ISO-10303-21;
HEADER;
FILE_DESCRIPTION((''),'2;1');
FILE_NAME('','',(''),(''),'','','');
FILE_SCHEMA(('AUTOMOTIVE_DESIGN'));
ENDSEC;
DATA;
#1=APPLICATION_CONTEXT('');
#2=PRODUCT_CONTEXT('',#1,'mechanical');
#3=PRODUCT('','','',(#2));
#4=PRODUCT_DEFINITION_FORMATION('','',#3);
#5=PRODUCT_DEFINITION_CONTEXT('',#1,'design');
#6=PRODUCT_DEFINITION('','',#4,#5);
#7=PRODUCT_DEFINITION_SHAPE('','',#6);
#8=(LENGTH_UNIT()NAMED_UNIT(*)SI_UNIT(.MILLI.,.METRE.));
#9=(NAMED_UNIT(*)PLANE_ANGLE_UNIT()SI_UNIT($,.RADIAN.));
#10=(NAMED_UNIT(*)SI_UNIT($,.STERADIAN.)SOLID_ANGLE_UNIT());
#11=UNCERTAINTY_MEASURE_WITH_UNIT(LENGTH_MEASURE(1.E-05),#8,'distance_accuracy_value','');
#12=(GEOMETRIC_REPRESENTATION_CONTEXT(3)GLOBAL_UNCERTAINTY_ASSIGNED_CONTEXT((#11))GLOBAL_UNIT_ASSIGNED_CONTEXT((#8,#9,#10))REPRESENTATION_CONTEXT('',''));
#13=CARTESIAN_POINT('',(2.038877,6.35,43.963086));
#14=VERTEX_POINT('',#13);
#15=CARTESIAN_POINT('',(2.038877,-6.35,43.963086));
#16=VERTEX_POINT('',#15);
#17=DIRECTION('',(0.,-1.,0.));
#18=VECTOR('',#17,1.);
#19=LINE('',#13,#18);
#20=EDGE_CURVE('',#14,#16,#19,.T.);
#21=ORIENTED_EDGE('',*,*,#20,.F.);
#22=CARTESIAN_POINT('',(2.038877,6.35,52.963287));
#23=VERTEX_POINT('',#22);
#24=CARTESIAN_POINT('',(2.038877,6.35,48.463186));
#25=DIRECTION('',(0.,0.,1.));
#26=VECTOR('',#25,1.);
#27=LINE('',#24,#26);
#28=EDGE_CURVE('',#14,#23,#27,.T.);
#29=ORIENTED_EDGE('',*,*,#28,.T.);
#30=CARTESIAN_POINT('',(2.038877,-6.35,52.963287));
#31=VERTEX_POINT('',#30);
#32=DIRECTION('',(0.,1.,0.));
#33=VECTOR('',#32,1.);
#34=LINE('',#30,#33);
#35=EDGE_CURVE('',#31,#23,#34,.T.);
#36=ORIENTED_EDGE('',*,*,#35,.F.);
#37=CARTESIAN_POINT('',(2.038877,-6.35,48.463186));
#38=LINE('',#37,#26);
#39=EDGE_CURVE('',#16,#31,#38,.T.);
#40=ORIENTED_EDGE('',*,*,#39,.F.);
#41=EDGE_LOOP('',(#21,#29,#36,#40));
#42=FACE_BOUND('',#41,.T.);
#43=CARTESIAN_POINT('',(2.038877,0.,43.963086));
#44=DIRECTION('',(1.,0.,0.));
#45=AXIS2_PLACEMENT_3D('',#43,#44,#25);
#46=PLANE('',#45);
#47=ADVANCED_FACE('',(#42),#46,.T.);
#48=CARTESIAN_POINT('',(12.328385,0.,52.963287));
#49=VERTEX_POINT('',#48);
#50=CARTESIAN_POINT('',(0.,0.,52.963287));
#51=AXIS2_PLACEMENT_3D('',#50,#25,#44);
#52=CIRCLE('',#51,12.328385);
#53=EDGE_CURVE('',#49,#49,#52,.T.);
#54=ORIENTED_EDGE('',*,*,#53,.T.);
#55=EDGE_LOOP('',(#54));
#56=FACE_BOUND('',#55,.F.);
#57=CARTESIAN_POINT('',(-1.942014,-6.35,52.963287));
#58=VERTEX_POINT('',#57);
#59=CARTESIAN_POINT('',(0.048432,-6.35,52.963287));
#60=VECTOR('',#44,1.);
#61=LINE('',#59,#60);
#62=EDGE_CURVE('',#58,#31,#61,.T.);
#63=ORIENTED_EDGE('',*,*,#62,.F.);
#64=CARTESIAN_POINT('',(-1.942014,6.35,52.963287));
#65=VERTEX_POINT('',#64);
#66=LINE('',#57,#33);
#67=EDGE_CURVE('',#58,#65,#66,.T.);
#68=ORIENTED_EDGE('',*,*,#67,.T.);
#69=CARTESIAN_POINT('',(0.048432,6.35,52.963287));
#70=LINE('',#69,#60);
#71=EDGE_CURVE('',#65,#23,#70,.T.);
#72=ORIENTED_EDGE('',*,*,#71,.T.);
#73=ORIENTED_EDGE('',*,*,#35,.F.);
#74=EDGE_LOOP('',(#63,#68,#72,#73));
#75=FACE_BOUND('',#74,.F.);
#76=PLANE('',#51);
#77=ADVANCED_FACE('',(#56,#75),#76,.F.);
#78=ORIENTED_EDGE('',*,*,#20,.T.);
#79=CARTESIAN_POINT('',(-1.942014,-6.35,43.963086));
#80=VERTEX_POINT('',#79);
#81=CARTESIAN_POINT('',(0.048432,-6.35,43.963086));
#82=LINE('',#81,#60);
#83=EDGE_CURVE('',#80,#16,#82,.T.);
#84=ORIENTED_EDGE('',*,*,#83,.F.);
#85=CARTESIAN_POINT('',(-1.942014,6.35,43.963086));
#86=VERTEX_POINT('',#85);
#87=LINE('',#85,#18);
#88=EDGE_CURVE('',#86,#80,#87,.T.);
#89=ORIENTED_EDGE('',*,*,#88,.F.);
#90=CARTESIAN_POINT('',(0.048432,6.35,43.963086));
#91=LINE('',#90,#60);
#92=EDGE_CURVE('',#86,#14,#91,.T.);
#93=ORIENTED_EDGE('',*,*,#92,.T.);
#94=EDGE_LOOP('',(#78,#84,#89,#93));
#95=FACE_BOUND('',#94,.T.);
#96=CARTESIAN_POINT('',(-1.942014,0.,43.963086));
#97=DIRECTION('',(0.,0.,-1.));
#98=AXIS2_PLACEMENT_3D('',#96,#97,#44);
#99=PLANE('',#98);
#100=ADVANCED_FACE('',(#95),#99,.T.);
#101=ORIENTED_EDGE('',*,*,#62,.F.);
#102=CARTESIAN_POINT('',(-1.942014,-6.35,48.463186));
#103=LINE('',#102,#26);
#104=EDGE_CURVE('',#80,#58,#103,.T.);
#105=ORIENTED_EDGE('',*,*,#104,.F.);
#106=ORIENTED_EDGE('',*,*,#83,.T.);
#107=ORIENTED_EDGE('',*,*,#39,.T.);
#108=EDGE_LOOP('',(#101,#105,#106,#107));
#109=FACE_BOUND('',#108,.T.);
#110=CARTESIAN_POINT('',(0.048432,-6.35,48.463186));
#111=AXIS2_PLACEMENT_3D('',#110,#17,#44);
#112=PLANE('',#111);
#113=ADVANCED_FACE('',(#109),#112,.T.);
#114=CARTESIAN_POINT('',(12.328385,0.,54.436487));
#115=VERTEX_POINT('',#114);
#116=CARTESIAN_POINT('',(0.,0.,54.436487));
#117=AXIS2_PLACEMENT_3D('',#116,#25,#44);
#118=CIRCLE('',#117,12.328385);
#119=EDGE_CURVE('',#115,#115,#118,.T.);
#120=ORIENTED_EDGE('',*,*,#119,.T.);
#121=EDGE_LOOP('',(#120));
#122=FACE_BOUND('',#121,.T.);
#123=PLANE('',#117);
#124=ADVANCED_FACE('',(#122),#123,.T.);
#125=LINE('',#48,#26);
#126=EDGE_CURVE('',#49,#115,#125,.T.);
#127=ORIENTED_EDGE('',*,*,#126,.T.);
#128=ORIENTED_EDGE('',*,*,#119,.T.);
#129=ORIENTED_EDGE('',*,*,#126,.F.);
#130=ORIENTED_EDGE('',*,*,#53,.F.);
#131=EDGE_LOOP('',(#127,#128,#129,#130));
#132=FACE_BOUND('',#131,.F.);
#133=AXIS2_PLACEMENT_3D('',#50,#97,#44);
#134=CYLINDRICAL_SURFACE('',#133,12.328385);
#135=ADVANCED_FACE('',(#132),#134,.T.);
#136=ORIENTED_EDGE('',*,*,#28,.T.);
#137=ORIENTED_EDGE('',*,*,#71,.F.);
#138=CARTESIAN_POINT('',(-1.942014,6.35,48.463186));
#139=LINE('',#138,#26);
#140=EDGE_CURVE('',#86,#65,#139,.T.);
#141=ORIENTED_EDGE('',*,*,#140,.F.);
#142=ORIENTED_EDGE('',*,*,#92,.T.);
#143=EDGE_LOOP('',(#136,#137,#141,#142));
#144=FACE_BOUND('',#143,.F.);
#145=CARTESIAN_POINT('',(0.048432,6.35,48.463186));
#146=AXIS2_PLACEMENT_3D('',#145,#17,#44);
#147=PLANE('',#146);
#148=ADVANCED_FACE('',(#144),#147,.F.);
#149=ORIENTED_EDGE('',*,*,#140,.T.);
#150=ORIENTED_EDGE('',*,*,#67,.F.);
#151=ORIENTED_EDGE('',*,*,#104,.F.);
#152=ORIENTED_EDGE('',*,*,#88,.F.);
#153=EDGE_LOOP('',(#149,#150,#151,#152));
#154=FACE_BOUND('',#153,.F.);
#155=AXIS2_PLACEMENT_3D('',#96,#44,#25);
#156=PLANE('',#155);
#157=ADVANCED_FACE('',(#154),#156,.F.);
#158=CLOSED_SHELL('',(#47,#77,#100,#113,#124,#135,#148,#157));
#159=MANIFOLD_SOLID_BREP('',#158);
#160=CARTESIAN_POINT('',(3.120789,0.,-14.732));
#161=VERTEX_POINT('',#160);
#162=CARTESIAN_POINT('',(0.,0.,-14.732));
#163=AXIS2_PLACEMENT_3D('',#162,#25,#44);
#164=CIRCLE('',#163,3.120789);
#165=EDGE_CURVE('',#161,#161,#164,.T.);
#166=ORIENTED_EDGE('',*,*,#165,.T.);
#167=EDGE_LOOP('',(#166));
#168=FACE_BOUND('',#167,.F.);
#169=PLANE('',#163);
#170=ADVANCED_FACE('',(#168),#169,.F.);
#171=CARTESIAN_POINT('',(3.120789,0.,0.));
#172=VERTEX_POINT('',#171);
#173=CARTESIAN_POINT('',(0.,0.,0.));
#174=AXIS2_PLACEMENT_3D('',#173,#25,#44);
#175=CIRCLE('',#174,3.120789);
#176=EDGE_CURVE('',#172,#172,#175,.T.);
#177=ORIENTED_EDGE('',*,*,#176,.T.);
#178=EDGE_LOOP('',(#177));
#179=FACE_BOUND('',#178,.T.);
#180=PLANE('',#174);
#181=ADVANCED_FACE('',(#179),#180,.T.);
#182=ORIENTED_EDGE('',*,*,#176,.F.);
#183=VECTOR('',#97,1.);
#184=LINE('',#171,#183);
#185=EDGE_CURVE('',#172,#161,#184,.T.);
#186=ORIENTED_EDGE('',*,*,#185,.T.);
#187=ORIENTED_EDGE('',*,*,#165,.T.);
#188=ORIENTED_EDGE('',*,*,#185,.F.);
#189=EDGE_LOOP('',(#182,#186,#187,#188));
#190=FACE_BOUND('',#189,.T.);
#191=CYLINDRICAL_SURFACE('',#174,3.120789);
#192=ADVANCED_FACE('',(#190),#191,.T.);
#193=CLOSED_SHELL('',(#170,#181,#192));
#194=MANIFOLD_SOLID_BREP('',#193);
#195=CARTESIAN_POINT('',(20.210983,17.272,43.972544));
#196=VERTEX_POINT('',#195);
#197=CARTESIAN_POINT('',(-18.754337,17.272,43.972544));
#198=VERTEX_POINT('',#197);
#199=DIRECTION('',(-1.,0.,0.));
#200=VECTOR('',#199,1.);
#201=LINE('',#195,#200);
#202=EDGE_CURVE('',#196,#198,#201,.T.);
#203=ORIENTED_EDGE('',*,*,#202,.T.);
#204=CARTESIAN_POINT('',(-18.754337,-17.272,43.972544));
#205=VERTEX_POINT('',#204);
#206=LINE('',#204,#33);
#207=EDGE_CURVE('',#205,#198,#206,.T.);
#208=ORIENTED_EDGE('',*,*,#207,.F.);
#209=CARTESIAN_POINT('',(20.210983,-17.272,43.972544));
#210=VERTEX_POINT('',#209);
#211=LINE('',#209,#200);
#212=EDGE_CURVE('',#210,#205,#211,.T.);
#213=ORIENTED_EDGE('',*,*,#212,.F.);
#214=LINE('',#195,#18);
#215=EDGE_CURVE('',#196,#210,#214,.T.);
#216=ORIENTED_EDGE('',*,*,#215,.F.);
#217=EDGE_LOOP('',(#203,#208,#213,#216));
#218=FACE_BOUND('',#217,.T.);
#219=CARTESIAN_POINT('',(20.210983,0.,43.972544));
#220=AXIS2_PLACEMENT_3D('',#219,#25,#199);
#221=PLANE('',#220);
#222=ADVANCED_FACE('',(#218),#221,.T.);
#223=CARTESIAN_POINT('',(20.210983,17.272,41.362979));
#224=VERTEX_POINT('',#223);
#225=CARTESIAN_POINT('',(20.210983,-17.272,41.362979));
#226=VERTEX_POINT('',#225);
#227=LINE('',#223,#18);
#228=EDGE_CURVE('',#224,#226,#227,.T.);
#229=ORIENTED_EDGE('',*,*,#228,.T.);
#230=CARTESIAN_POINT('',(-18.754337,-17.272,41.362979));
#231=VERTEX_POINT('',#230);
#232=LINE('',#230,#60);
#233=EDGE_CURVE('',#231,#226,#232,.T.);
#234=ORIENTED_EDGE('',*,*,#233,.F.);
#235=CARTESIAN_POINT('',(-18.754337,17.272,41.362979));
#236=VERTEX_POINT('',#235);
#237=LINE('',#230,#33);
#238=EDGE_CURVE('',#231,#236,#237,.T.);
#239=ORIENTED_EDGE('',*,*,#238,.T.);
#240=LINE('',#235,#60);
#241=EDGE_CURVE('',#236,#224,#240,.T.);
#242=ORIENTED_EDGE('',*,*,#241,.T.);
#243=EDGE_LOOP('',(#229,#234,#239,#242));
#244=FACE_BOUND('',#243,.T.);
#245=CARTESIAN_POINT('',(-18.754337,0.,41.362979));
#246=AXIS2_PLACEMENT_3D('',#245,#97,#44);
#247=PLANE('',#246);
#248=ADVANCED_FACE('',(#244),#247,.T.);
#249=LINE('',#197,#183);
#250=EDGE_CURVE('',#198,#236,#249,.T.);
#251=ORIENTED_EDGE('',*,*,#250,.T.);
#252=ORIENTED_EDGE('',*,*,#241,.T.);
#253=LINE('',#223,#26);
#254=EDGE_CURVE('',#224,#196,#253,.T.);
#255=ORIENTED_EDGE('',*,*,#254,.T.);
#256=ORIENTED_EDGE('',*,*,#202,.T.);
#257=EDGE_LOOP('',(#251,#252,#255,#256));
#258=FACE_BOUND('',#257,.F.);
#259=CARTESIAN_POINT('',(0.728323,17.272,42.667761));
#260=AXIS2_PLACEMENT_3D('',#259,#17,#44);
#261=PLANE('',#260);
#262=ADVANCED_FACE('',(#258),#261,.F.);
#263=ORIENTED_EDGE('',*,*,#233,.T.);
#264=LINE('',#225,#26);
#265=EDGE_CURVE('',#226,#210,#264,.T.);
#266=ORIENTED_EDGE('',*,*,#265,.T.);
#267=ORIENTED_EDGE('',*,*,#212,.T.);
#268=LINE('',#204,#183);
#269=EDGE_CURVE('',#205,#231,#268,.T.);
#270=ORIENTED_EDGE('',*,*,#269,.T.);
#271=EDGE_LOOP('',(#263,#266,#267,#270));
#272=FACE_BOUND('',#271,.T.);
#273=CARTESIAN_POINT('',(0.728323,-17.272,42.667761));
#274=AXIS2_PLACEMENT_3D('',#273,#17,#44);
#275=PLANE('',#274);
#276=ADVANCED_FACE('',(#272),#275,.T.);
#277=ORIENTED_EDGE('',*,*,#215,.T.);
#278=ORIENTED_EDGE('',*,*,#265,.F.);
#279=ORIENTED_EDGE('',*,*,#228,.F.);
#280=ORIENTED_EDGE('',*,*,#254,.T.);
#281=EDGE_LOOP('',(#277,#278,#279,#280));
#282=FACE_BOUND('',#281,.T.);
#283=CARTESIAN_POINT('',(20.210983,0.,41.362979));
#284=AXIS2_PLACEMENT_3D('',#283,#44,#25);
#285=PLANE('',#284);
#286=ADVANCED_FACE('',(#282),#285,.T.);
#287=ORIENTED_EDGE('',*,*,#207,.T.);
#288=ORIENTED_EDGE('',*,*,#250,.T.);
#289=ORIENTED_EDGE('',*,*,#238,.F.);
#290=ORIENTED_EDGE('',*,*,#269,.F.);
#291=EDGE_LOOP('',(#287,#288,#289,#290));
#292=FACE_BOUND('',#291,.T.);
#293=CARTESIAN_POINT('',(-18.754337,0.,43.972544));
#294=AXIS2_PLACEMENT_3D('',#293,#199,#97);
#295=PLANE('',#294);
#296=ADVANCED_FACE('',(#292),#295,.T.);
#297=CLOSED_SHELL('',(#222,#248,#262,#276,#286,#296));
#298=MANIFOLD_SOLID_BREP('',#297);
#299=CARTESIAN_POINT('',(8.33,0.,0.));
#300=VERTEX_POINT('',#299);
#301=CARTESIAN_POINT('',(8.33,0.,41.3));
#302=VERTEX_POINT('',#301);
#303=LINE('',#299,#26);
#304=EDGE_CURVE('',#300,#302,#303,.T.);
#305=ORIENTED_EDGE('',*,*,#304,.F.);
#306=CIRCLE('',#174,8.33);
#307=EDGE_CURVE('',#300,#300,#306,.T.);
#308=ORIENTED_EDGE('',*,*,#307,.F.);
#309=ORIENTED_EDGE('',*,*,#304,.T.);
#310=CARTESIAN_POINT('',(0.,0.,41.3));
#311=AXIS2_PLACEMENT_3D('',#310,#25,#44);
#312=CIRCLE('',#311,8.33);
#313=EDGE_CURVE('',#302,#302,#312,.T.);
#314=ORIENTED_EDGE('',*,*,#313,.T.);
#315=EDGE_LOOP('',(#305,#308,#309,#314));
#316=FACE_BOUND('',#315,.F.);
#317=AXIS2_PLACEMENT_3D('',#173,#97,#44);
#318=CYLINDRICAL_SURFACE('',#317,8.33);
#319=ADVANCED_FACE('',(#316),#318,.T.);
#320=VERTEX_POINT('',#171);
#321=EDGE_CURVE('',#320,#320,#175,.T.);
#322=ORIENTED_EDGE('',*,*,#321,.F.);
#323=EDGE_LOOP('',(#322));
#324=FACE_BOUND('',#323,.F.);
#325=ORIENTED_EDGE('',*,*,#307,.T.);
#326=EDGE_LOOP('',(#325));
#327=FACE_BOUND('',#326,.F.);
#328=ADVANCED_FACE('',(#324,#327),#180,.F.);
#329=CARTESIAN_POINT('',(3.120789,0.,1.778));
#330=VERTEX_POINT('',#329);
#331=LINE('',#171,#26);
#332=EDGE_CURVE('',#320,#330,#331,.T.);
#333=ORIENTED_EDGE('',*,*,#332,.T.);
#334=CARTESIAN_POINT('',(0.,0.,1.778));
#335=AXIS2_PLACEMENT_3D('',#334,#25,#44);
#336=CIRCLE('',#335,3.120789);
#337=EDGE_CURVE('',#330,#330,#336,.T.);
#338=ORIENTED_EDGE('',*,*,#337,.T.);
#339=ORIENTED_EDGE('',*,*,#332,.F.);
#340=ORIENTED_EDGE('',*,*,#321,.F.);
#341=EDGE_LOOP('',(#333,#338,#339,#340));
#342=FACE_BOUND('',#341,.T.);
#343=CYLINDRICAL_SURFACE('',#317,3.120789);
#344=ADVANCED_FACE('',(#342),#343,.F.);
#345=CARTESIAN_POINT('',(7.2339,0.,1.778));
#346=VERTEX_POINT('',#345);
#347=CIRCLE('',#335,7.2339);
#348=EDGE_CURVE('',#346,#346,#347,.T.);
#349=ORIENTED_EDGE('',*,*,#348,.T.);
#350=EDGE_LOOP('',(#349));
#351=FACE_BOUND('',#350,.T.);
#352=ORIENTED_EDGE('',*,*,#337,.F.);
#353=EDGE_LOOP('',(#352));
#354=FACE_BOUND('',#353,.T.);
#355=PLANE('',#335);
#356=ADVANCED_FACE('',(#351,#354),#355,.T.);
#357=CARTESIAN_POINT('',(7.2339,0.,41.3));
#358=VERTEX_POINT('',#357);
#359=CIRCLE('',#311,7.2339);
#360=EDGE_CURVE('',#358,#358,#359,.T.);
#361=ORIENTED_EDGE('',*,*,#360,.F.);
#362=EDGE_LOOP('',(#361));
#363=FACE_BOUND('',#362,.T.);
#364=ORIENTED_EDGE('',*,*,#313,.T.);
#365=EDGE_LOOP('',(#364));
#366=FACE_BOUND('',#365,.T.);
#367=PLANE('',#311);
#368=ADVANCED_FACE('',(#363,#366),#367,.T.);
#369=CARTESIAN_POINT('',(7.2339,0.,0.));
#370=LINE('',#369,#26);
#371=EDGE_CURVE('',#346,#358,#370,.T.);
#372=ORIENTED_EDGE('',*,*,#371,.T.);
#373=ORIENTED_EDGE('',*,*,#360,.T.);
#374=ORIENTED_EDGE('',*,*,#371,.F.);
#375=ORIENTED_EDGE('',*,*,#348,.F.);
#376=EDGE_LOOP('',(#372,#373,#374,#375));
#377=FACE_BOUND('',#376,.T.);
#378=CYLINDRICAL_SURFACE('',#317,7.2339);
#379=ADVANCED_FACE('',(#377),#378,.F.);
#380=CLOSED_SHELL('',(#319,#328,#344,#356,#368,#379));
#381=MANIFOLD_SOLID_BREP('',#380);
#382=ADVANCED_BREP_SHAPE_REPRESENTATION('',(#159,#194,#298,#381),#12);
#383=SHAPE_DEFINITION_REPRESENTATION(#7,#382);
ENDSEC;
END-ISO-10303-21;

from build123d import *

# Parameters (mm, degrees)
F0_R      = 8.33
F0_R_2    = 7.2338998847
F1_DEPTH  = 41.3
F0_R_3    = 3.120788822
F3_DEPTH  = 1.778
F4_DEPTH  = 14.732
F6_DEPTH  = 17.272
F7_W      = 3.9808914298
F7_H      = 9.0002007782
F8_DEPTH  = 6.35
F11_R     = 12.3283850527
F11_W     = 3.9808914298
F11_H     = 12.7
F12_DEPTH = 1.4732


# Not quite as in the source:
# - the program builds the solid bodies; features that only make, move or delete a surface that nothing else refers to are left out


with BuildPart() as f1:
    # F0 (on Top) → F1 (new body)
    with BuildSketch(Plane.XY):
        Circle(F0_R)
        Circle(F0_R_2, mode=Mode.SUBTRACT)
    extrude(amount=F1_DEPTH)

    # F0 (on Top) → F3 (join)
    with BuildSketch(Plane.XY):
        Circle(F0_R_2)
        Circle(F0_R_3, mode=Mode.SUBTRACT)
    extrude(amount=F3_DEPTH)


with BuildPart() as f4:
    # F0 (on Top) → F4 (new body)
    with BuildSketch(Plane.XY):
        Circle(F0_R_3)
    extrude(amount=-F4_DEPTH)


with BuildPart() as f6:
    # F5 (on Front) → F6 (new body, symmetric)
    with BuildSketch(Plane.XZ):
        Polygon((-18.754336983, 41.362978518), (0, 41.362978518), (20.2109832317, 41.362978518), (20.2109832317, 43.9725443721), (-18.754336983, 43.9725443721), align=None)
    extrude(amount=F6_DEPTH, both=True)


with BuildPart() as f8:
    # F7 (on Front) → F8 (new body, symmetric)
    with BuildSketch(Plane.XZ):
        with Locations((0.0484315096, 48.4631862491)):
            Rectangle(F7_W, F7_H)
    extrude(amount=F8_DEPTH, both=True)

    # F11 (on face) → F12 (join)
    with BuildSketch(Plane.XY.offset(52.9632866383)):
        Circle(F11_R)
        with Locations((0.0484315096, 0)):
            Rectangle(F11_W, F11_H, mode=Mode.SUBTRACT)
        Circle(F11_R)
    extrude(amount=F12_DEPTH)


solid = Compound([f1.part, f4.part, f6.part, f8.part])
